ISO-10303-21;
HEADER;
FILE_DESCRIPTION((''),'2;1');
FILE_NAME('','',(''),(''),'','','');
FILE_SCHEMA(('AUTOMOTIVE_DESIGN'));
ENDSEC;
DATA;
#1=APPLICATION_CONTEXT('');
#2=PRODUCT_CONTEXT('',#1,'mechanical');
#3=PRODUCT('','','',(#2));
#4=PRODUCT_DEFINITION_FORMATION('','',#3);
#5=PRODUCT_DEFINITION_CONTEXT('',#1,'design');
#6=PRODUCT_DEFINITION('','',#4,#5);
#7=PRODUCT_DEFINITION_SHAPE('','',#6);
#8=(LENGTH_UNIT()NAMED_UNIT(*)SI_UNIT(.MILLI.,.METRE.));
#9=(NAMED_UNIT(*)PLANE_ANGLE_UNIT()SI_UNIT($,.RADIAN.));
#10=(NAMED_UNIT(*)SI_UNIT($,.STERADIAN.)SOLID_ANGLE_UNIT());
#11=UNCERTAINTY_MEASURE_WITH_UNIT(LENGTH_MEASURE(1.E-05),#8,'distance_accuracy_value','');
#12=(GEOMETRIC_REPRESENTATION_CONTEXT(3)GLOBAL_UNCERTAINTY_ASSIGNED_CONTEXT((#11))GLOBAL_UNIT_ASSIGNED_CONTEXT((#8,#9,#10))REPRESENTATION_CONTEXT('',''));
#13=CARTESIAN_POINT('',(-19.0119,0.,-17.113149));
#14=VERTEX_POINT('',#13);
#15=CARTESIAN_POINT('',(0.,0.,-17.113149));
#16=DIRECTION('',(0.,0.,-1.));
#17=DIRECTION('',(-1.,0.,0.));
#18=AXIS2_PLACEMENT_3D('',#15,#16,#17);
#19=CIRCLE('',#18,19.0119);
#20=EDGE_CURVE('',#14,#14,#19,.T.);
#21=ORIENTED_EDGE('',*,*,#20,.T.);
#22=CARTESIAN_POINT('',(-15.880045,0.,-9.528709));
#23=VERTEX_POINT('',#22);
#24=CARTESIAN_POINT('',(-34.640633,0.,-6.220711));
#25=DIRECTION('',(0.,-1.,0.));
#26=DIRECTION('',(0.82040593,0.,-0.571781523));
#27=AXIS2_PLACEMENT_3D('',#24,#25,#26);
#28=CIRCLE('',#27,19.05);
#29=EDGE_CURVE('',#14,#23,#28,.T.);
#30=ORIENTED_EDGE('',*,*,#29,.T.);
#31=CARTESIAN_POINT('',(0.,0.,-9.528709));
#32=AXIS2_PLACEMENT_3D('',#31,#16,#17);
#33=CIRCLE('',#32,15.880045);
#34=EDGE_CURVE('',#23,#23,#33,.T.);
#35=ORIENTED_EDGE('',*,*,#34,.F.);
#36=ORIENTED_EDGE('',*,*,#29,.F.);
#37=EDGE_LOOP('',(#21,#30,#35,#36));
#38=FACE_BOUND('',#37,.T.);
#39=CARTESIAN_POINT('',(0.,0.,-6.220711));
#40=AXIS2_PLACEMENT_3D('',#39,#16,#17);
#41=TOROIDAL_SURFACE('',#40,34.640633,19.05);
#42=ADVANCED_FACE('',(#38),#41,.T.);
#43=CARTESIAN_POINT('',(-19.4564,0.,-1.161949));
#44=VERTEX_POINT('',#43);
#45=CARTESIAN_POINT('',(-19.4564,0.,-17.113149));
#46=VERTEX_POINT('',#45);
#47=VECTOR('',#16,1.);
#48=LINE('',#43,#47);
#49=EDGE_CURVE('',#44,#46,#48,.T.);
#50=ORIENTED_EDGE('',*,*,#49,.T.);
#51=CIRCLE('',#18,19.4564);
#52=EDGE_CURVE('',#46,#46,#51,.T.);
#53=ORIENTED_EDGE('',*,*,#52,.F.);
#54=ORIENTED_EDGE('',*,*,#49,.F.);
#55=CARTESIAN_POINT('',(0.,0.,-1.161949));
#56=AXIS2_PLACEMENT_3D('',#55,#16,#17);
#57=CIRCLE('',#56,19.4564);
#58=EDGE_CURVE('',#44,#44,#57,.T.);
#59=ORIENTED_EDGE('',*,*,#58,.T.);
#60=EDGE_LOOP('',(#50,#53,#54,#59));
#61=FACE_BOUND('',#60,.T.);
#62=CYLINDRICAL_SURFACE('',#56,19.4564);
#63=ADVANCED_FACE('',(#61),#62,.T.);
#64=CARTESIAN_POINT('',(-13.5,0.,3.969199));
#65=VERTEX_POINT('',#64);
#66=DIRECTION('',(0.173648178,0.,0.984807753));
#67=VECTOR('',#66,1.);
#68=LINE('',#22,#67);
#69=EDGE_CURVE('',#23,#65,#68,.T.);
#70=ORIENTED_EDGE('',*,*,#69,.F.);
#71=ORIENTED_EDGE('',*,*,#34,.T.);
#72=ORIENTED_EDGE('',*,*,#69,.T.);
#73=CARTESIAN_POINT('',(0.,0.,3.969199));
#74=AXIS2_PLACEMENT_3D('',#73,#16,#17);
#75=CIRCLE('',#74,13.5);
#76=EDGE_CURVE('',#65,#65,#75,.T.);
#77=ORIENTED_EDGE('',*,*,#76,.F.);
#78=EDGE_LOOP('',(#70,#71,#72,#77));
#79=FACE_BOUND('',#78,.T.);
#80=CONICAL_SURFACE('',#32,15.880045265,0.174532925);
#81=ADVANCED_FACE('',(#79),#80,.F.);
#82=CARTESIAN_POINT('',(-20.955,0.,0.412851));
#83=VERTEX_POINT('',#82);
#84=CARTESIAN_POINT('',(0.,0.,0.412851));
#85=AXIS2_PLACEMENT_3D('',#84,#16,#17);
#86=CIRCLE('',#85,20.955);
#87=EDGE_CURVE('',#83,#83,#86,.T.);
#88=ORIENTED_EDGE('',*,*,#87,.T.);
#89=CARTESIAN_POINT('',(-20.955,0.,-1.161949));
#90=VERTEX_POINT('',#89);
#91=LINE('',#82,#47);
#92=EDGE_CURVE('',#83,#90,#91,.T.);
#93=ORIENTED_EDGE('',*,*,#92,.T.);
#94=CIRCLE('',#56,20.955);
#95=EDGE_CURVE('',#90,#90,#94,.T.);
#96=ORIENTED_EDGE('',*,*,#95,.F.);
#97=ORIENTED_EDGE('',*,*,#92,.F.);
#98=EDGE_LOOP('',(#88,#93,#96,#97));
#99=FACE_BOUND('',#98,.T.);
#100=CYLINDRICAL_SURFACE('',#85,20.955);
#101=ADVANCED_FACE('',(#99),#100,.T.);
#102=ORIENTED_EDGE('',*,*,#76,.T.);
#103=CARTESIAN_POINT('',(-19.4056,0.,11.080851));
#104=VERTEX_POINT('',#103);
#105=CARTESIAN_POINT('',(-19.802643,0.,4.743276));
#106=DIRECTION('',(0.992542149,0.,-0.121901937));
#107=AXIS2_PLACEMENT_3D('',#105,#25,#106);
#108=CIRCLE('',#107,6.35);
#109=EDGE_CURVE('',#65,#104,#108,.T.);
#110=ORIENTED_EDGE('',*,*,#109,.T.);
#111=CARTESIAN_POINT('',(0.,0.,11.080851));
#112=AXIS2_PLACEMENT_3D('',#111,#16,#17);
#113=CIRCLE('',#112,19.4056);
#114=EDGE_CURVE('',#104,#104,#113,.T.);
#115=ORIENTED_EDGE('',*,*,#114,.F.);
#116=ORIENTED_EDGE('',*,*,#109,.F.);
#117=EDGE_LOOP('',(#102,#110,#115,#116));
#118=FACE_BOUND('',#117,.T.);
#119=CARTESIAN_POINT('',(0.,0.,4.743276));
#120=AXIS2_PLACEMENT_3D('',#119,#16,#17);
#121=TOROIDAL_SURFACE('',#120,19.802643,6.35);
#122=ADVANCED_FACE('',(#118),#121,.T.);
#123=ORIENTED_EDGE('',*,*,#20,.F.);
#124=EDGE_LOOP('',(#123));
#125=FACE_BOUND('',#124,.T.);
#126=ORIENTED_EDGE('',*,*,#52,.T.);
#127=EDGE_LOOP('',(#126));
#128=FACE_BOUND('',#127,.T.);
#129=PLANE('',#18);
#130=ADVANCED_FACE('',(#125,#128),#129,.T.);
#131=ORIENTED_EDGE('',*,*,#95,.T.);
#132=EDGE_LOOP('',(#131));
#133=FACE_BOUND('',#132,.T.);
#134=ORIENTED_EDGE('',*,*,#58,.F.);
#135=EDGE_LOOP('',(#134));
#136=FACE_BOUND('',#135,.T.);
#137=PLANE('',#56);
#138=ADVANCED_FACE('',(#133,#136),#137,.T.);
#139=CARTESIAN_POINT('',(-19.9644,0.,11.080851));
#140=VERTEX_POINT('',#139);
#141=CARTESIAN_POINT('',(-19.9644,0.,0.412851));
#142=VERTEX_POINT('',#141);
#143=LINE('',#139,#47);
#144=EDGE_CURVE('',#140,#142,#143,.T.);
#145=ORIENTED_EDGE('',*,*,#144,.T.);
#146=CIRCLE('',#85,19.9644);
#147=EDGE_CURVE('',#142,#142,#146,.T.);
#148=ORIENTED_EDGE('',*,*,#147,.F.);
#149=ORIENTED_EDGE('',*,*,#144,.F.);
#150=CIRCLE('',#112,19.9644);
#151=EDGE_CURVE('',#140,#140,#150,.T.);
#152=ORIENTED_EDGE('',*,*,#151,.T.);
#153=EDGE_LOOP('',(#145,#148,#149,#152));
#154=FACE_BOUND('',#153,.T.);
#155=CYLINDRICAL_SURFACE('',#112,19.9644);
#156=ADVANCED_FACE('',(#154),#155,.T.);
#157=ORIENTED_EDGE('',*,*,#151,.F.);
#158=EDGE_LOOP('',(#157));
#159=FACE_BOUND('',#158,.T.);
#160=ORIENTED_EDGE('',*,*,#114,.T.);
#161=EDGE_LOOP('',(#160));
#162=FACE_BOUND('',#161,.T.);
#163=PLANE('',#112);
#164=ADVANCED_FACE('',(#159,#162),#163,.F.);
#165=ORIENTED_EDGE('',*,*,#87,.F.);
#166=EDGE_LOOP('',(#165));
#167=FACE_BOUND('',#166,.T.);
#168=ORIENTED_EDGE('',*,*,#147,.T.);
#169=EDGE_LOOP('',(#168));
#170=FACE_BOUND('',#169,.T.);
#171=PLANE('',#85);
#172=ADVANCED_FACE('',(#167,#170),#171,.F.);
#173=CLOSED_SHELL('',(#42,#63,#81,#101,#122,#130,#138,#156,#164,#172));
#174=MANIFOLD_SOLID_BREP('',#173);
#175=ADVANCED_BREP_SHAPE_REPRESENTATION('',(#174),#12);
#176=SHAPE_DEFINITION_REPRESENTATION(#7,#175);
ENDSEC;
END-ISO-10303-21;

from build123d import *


# Not quite as in the source:
# - a feature names something its author has since deleted; it is built from what else it names


with BuildPart() as f1:
    # F0 (on Front) → F1 (revolve)
    with BuildSketch(Plane.XZ):
        with BuildLine():
            Line((-19.9644, 0.412851112), (-20.955, 0.412851112))
            Line((-20.955, 0.412851112), (-20.955, -1.161948888))
            Line((-20.955, -1.161948888), (-19.4564, -1.161948888))
            Line((-19.4564, -1.161948888), (-19.4564, -17.113148888))
            Line((-19.4564, -17.113148888), (-19.0119, -17.113148888))
            ThreePointArc((-19.0119, -17.113148888), (-17.0327575285, -13.4915583263), (-15.8800452648, -9.52870865))
            Line((-15.8800452648, -9.52870865), (-13.5, 3.9691987902))
            ThreePointArc((-13.5, 3.9691987902), (-14.9174256152, 8.8000179565), (-19.4056, 11.080851112))
            Line((-19.4056, 11.080851112), (-19.9644, 11.080851112))
            Line((-19.9644, 11.080851112), (-19.9644, 0.412851112))
        make_face()
    revolve(axis=Axis((0, 0, 12.5831294567), (0, 0, -1)))


solid = f1.part
